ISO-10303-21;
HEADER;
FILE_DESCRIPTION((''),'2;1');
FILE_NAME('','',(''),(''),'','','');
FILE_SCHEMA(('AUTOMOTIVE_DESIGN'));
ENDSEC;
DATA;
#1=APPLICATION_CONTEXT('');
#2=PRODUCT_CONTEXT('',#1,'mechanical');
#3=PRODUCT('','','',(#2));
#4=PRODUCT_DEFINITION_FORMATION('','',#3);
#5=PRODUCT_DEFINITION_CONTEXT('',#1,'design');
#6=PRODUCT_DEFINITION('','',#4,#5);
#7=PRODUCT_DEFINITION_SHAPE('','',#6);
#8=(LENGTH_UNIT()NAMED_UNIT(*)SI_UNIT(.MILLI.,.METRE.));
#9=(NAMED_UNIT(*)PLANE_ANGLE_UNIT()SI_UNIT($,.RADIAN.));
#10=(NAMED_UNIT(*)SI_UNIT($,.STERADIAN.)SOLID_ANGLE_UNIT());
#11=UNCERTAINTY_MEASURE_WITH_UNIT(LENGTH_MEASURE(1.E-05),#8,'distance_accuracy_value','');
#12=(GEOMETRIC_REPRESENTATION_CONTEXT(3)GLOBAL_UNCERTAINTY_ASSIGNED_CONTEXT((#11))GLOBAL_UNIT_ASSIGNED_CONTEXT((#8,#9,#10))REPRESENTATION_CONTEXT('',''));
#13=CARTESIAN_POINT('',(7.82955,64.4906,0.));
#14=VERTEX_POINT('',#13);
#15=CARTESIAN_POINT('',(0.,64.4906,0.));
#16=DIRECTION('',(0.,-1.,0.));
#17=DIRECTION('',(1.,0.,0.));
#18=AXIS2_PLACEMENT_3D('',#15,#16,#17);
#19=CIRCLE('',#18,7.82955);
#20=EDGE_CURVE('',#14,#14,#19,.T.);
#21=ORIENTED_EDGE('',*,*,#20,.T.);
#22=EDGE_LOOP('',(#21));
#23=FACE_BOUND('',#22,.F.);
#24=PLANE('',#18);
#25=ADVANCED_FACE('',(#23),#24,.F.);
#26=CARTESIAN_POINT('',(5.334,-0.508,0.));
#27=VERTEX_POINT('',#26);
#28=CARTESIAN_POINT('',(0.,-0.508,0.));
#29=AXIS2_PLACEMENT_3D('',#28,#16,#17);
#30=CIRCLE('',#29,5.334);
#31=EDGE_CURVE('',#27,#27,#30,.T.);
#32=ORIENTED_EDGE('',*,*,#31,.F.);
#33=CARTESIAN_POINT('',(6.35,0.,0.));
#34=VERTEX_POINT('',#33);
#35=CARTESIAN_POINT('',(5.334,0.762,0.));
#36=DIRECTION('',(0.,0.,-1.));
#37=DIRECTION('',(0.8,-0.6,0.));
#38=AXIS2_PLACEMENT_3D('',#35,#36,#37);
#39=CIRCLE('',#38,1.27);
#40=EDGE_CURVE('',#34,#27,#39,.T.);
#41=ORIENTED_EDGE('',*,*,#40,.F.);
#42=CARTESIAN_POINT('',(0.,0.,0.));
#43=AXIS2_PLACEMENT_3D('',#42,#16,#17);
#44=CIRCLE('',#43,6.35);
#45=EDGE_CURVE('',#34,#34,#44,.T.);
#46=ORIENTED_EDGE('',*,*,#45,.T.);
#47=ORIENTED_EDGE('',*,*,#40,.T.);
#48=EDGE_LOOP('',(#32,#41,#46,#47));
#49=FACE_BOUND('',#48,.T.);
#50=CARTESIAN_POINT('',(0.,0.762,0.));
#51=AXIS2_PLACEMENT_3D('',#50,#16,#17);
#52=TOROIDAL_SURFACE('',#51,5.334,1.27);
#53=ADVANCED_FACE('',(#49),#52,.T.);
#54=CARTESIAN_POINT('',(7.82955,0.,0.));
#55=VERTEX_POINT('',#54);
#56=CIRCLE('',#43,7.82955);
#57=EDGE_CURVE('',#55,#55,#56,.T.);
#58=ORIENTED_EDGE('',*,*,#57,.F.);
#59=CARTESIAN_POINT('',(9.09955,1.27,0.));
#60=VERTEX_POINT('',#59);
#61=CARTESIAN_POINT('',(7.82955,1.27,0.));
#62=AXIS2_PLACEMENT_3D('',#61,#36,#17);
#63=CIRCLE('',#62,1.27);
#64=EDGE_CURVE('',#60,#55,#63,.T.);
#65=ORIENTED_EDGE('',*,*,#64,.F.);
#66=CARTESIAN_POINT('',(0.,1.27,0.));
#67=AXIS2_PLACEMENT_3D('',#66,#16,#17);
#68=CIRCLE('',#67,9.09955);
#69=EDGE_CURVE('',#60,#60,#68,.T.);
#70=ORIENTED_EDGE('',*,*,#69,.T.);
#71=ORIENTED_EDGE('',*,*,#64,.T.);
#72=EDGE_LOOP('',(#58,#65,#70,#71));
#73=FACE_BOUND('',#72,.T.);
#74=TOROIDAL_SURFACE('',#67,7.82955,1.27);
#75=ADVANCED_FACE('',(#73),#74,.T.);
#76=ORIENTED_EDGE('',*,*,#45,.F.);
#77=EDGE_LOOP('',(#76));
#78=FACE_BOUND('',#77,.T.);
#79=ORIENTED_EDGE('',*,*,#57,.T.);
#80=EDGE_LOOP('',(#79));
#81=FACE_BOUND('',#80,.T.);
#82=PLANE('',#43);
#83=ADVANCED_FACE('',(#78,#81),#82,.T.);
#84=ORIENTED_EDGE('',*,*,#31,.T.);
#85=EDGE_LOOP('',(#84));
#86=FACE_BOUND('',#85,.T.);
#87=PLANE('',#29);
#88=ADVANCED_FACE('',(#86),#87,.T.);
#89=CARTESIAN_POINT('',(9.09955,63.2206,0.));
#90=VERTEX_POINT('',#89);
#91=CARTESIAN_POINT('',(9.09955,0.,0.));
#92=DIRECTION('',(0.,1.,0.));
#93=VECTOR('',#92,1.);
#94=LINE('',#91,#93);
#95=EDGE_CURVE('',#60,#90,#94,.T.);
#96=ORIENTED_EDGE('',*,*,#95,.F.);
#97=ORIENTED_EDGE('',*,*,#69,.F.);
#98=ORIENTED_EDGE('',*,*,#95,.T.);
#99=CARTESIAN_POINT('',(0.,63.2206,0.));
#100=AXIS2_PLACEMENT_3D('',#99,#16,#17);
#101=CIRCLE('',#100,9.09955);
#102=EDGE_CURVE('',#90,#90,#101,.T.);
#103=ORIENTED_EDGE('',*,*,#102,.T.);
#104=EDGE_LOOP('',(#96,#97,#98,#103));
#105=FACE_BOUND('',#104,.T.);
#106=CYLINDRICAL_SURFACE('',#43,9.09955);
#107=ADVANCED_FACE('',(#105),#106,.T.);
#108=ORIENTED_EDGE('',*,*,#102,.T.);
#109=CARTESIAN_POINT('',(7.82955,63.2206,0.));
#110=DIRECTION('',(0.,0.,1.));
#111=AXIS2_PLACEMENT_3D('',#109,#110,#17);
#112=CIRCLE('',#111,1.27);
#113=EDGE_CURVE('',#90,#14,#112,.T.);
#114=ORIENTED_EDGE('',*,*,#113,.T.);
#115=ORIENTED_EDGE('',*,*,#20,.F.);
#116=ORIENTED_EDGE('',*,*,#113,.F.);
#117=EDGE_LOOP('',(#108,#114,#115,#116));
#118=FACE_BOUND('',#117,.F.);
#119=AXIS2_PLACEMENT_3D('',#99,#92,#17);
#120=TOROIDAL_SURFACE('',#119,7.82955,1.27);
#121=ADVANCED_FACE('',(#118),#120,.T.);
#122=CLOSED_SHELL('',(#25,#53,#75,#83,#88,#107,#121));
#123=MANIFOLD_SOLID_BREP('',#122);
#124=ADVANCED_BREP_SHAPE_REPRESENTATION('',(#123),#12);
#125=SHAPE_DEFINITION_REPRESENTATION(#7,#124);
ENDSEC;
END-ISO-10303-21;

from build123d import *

# Parameters (mm, degrees)
F0_R     = 9.09955
F1_DEPTH = 64.4906
F2_R     = 6.35
F3_DEPTH = 0.508


# Not quite as in the source:
# - a fillet or chamfer that OpenCascade refuses, or shapes differently, is made with other operations: its cross-section is extruded or revolved along the edge and cut away or added


with BuildPart() as f1:
    # F0 (on Front) → F1 (new body)
    with BuildSketch(Plane.XZ):
        Circle(F0_R)
    extrude(amount=-F1_DEPTH)

    # F2 (on face) → F3 (join)
    with BuildSketch(Plane.XZ):
        Circle(F2_R)
    extrude(amount=F3_DEPTH)

    # F4: fillet of radius 1.27 on 3 edges, made by hand

    # F4_s1 → F4_t2 (revolve, cut)
    with BuildSketch(Plane.XY):
        with BuildLine():
            ThreePointArc((9.09955, 63.2206), (8.7275756121, 64.1186256121), (7.82955, 64.4906))
            Line((7.82955, 64.4906), (9.09955, 64.4906))
            Line((9.09955, 64.4906), (9.09955, 63.2206))
        make_face()
    revolve(axis=Axis((0, 64.4906, 0), (0, -1, 0)), mode=Mode.SUBTRACT)

    # F4_s3 → F4_t4 (revolve, cut)
    with BuildSketch(Plane.XY):
        with BuildLine():
            ThreePointArc((9.09955, 1.27), (8.7275756121, 0.3719743879), (7.82955, 0))
            Line((7.82955, 0), (9.09955, 0))
            Line((9.09955, 0), (9.09955, 1.27))
        make_face()
    revolve(axis=Axis((0, 0, 0), (0, -1, 0)), mode=Mode.SUBTRACT)

    # F4_s5 → F4_t6 (revolve, cut)
    with BuildSketch(Plane.XY):
        with BuildLine():
            ThreePointArc((6.35, 0), (5.9019612663, -0.3739225326), (5.334, -0.508))
            Line((5.334, -0.508), (6.35, -0.508))
            Line((6.35, -0.508), (6.35, 0))
        make_face()
    revolve(axis=Axis((0, -0.508, 0), (0, -1, 0)), mode=Mode.SUBTRACT)


solid = f1.part
